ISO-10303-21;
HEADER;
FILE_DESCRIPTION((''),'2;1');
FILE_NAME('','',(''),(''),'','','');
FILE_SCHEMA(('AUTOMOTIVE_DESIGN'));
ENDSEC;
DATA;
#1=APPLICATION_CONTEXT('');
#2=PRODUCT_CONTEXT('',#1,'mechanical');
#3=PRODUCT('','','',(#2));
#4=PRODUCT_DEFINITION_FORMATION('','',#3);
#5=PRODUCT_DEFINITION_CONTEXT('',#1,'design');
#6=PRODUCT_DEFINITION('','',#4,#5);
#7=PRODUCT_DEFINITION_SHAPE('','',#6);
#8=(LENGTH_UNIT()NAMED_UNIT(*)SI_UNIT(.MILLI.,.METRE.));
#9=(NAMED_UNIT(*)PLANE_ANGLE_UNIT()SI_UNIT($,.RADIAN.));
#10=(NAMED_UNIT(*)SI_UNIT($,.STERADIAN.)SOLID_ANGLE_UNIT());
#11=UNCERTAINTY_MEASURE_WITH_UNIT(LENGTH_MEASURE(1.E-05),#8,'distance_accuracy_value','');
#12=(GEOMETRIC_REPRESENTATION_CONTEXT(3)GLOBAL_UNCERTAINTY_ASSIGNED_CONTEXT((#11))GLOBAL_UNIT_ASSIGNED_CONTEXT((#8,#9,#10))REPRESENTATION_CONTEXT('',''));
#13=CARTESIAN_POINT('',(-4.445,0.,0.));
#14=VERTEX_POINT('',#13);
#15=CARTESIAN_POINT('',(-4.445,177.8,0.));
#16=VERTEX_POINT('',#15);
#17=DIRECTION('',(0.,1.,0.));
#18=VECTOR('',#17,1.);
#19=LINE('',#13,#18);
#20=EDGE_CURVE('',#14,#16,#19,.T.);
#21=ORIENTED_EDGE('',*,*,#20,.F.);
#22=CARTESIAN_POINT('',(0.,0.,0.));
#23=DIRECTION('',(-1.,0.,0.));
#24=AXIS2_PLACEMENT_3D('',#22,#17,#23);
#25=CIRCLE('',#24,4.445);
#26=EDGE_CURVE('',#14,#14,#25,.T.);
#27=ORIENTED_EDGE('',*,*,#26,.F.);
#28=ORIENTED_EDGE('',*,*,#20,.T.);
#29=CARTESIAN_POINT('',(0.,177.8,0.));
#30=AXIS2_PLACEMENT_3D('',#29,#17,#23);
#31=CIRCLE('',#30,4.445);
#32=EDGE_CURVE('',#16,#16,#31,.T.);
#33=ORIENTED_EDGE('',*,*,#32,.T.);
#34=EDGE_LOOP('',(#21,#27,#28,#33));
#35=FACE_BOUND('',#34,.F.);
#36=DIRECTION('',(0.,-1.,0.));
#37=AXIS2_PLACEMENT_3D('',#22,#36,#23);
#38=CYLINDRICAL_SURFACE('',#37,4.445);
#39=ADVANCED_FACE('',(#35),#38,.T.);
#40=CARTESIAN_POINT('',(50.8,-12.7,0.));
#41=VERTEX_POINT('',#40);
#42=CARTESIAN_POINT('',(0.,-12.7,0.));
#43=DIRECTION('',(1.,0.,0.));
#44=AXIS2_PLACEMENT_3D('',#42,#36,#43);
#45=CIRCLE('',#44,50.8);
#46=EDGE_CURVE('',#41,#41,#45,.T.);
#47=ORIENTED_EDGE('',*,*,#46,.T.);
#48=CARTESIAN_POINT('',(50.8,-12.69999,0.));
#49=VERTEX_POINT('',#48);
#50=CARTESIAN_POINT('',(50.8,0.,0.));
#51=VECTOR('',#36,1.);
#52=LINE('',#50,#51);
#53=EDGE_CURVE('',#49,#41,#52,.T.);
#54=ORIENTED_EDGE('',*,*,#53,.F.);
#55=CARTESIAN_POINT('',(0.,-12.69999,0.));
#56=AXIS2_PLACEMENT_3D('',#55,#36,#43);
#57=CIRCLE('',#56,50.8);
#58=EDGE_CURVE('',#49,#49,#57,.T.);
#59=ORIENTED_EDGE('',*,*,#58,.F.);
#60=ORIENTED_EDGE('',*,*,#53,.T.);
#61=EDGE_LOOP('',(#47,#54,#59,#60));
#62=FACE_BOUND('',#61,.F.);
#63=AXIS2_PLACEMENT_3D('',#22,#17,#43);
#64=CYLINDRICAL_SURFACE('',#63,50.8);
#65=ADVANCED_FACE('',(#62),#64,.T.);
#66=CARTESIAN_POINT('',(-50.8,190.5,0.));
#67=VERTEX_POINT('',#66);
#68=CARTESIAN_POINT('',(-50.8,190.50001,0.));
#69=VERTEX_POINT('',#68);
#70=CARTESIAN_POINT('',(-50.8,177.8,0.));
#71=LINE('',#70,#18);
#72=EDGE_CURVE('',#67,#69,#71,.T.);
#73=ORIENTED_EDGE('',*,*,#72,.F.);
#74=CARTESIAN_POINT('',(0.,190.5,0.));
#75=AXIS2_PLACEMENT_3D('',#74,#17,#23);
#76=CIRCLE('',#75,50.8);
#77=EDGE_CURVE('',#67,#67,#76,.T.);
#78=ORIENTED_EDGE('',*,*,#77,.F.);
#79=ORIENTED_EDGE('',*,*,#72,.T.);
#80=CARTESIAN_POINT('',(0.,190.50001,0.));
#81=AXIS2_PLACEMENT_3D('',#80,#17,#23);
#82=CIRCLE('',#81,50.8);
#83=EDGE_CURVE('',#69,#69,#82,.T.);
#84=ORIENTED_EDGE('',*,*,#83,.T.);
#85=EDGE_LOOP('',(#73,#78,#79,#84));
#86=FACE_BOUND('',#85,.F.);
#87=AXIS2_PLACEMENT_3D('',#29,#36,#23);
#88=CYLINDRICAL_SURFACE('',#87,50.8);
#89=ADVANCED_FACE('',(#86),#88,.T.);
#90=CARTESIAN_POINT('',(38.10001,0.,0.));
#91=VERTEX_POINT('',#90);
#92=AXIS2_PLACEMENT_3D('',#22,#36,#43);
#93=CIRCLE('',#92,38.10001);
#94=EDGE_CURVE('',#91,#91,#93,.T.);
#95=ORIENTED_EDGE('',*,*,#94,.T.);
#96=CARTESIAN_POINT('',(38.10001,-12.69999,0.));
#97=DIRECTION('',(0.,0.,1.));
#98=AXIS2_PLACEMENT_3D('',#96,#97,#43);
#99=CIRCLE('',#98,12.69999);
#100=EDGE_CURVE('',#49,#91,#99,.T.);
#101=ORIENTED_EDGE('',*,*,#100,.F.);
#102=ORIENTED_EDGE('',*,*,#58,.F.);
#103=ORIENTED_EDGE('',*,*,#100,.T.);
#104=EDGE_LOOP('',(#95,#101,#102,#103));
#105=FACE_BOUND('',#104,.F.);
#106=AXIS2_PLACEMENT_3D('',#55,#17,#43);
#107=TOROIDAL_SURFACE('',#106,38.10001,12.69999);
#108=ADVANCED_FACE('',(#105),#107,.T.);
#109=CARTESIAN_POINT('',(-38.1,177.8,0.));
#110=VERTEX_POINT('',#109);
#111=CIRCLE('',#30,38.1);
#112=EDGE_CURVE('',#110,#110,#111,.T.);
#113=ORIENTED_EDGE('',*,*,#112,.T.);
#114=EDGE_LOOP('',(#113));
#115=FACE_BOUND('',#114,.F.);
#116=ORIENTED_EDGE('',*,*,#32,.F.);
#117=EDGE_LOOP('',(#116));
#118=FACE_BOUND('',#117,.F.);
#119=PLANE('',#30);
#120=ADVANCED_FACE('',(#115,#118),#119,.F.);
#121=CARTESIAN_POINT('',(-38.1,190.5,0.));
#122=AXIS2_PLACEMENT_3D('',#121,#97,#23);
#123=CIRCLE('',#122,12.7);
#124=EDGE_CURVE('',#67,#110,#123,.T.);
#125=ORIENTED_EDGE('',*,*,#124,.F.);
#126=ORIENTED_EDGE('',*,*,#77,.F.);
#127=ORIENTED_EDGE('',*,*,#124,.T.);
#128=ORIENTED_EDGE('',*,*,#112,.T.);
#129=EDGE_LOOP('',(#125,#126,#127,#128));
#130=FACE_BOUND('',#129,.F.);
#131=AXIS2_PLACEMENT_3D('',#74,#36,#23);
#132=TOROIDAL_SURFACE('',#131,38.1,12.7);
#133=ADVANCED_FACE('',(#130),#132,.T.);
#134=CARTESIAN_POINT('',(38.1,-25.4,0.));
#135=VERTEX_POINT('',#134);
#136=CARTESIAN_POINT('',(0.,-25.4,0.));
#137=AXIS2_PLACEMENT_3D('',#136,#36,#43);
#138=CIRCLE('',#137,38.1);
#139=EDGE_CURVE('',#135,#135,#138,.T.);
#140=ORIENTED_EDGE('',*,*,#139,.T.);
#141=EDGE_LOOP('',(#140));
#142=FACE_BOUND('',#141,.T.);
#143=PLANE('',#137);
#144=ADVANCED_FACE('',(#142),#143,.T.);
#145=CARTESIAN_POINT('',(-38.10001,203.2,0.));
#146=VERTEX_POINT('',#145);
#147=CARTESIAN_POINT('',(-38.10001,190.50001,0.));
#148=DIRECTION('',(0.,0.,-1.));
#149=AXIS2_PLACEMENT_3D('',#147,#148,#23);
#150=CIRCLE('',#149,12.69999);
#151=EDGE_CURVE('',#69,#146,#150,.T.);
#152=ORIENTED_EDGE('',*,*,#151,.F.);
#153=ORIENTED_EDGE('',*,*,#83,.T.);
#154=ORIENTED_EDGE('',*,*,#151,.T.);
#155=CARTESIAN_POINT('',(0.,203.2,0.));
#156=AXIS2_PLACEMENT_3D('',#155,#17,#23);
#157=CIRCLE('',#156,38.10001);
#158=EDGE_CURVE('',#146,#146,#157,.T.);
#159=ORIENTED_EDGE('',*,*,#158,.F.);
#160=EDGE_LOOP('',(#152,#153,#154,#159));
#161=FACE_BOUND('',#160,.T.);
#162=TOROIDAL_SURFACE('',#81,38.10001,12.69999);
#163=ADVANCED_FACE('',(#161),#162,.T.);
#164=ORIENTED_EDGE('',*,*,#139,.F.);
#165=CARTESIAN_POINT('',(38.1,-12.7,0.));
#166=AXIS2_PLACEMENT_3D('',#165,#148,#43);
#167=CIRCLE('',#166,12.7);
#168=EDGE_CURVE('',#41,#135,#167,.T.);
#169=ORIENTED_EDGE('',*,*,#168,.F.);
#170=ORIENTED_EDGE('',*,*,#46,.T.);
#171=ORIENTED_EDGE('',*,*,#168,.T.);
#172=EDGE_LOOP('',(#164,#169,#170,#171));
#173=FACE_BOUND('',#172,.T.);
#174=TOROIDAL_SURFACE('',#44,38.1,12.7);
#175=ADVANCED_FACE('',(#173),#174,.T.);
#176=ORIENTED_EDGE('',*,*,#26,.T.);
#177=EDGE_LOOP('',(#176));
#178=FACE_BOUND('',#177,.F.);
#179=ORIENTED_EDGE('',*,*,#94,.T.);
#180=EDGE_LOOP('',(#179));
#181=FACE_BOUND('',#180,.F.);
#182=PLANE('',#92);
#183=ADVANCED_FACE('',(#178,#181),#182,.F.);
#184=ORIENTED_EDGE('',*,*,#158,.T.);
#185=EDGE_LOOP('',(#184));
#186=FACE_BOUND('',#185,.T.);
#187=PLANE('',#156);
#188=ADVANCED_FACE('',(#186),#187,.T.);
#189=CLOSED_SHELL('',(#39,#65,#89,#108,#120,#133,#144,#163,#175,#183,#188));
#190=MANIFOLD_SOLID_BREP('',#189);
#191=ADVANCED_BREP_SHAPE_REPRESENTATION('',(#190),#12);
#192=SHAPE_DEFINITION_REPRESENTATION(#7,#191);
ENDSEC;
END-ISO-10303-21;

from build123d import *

# Parameters (mm, degrees)
F0_R     = 50.8
F1_DEPTH = 25.4
F2_R     = 12.7
F3_R     = 12.69999
F4_R     = 4.445
F5_DEPTH = 177.8
F6_R     = 50.8
F7_DEPTH = 25.4
F8_R     = 12.7
F9_R     = 12.69999


# Not quite as in the source:
# - a fillet or chamfer is up to 0.001 mm smaller than in the source, because OpenCascade refuses the exact size


with BuildPart() as f1:
    # F0 (on Front) → F1 (new body)
    with BuildSketch(Plane.XZ):
        Circle(F0_R)
    extrude(amount=F1_DEPTH)

    # F2
    f2_edges = [f1.edges().sort_by_distance(p)[0] for p in [
        (-50.8, -25.4, 0),
    ]]
    fillet(f2_edges, radius=F2_R)

    # F3 (radius 12.7 in the source; OpenCascade refuses exactly that, so slightly less here)
    f3_edges = [f1.edges().sort_by_distance(p)[0] for p in [
        (50.8, -6.35, 0),
        (-50.8, -12.7, 0),
        (-50.8, 0, 0),
    ]]
    fillet(f3_edges, radius=F3_R)

    # F4 (on face) → F5 (join)
    with BuildSketch(Plane(origin=(0, 0, 0), x_dir=(-1, 0, 0), z_dir=(0, 1, 0))):
        Circle(F4_R)
    extrude(amount=F5_DEPTH)

    # F6 (on face) → F7 (join)
    with BuildSketch(Plane(origin=(0, 177.8, 0), x_dir=(-1, 0, 0), z_dir=(0, 1, 0))):
        Circle(F6_R)
    extrude(amount=F7_DEPTH)

    # F8
    f8_edges = [f1.edges().sort_by_distance(p)[0] for p in [
        (50.8, 177.8, 0),
    ]]
    fillet(f8_edges, radius=F8_R)

    # F9 (radius 12.7 in the source; OpenCascade refuses exactly that, so slightly less here)
    f9_edges = [f1.edges().sort_by_distance(p)[0] for p in [
        (50.8, 203.2, 0),
    ]]
    fillet(f9_edges, radius=F9_R)


solid = f1.part
